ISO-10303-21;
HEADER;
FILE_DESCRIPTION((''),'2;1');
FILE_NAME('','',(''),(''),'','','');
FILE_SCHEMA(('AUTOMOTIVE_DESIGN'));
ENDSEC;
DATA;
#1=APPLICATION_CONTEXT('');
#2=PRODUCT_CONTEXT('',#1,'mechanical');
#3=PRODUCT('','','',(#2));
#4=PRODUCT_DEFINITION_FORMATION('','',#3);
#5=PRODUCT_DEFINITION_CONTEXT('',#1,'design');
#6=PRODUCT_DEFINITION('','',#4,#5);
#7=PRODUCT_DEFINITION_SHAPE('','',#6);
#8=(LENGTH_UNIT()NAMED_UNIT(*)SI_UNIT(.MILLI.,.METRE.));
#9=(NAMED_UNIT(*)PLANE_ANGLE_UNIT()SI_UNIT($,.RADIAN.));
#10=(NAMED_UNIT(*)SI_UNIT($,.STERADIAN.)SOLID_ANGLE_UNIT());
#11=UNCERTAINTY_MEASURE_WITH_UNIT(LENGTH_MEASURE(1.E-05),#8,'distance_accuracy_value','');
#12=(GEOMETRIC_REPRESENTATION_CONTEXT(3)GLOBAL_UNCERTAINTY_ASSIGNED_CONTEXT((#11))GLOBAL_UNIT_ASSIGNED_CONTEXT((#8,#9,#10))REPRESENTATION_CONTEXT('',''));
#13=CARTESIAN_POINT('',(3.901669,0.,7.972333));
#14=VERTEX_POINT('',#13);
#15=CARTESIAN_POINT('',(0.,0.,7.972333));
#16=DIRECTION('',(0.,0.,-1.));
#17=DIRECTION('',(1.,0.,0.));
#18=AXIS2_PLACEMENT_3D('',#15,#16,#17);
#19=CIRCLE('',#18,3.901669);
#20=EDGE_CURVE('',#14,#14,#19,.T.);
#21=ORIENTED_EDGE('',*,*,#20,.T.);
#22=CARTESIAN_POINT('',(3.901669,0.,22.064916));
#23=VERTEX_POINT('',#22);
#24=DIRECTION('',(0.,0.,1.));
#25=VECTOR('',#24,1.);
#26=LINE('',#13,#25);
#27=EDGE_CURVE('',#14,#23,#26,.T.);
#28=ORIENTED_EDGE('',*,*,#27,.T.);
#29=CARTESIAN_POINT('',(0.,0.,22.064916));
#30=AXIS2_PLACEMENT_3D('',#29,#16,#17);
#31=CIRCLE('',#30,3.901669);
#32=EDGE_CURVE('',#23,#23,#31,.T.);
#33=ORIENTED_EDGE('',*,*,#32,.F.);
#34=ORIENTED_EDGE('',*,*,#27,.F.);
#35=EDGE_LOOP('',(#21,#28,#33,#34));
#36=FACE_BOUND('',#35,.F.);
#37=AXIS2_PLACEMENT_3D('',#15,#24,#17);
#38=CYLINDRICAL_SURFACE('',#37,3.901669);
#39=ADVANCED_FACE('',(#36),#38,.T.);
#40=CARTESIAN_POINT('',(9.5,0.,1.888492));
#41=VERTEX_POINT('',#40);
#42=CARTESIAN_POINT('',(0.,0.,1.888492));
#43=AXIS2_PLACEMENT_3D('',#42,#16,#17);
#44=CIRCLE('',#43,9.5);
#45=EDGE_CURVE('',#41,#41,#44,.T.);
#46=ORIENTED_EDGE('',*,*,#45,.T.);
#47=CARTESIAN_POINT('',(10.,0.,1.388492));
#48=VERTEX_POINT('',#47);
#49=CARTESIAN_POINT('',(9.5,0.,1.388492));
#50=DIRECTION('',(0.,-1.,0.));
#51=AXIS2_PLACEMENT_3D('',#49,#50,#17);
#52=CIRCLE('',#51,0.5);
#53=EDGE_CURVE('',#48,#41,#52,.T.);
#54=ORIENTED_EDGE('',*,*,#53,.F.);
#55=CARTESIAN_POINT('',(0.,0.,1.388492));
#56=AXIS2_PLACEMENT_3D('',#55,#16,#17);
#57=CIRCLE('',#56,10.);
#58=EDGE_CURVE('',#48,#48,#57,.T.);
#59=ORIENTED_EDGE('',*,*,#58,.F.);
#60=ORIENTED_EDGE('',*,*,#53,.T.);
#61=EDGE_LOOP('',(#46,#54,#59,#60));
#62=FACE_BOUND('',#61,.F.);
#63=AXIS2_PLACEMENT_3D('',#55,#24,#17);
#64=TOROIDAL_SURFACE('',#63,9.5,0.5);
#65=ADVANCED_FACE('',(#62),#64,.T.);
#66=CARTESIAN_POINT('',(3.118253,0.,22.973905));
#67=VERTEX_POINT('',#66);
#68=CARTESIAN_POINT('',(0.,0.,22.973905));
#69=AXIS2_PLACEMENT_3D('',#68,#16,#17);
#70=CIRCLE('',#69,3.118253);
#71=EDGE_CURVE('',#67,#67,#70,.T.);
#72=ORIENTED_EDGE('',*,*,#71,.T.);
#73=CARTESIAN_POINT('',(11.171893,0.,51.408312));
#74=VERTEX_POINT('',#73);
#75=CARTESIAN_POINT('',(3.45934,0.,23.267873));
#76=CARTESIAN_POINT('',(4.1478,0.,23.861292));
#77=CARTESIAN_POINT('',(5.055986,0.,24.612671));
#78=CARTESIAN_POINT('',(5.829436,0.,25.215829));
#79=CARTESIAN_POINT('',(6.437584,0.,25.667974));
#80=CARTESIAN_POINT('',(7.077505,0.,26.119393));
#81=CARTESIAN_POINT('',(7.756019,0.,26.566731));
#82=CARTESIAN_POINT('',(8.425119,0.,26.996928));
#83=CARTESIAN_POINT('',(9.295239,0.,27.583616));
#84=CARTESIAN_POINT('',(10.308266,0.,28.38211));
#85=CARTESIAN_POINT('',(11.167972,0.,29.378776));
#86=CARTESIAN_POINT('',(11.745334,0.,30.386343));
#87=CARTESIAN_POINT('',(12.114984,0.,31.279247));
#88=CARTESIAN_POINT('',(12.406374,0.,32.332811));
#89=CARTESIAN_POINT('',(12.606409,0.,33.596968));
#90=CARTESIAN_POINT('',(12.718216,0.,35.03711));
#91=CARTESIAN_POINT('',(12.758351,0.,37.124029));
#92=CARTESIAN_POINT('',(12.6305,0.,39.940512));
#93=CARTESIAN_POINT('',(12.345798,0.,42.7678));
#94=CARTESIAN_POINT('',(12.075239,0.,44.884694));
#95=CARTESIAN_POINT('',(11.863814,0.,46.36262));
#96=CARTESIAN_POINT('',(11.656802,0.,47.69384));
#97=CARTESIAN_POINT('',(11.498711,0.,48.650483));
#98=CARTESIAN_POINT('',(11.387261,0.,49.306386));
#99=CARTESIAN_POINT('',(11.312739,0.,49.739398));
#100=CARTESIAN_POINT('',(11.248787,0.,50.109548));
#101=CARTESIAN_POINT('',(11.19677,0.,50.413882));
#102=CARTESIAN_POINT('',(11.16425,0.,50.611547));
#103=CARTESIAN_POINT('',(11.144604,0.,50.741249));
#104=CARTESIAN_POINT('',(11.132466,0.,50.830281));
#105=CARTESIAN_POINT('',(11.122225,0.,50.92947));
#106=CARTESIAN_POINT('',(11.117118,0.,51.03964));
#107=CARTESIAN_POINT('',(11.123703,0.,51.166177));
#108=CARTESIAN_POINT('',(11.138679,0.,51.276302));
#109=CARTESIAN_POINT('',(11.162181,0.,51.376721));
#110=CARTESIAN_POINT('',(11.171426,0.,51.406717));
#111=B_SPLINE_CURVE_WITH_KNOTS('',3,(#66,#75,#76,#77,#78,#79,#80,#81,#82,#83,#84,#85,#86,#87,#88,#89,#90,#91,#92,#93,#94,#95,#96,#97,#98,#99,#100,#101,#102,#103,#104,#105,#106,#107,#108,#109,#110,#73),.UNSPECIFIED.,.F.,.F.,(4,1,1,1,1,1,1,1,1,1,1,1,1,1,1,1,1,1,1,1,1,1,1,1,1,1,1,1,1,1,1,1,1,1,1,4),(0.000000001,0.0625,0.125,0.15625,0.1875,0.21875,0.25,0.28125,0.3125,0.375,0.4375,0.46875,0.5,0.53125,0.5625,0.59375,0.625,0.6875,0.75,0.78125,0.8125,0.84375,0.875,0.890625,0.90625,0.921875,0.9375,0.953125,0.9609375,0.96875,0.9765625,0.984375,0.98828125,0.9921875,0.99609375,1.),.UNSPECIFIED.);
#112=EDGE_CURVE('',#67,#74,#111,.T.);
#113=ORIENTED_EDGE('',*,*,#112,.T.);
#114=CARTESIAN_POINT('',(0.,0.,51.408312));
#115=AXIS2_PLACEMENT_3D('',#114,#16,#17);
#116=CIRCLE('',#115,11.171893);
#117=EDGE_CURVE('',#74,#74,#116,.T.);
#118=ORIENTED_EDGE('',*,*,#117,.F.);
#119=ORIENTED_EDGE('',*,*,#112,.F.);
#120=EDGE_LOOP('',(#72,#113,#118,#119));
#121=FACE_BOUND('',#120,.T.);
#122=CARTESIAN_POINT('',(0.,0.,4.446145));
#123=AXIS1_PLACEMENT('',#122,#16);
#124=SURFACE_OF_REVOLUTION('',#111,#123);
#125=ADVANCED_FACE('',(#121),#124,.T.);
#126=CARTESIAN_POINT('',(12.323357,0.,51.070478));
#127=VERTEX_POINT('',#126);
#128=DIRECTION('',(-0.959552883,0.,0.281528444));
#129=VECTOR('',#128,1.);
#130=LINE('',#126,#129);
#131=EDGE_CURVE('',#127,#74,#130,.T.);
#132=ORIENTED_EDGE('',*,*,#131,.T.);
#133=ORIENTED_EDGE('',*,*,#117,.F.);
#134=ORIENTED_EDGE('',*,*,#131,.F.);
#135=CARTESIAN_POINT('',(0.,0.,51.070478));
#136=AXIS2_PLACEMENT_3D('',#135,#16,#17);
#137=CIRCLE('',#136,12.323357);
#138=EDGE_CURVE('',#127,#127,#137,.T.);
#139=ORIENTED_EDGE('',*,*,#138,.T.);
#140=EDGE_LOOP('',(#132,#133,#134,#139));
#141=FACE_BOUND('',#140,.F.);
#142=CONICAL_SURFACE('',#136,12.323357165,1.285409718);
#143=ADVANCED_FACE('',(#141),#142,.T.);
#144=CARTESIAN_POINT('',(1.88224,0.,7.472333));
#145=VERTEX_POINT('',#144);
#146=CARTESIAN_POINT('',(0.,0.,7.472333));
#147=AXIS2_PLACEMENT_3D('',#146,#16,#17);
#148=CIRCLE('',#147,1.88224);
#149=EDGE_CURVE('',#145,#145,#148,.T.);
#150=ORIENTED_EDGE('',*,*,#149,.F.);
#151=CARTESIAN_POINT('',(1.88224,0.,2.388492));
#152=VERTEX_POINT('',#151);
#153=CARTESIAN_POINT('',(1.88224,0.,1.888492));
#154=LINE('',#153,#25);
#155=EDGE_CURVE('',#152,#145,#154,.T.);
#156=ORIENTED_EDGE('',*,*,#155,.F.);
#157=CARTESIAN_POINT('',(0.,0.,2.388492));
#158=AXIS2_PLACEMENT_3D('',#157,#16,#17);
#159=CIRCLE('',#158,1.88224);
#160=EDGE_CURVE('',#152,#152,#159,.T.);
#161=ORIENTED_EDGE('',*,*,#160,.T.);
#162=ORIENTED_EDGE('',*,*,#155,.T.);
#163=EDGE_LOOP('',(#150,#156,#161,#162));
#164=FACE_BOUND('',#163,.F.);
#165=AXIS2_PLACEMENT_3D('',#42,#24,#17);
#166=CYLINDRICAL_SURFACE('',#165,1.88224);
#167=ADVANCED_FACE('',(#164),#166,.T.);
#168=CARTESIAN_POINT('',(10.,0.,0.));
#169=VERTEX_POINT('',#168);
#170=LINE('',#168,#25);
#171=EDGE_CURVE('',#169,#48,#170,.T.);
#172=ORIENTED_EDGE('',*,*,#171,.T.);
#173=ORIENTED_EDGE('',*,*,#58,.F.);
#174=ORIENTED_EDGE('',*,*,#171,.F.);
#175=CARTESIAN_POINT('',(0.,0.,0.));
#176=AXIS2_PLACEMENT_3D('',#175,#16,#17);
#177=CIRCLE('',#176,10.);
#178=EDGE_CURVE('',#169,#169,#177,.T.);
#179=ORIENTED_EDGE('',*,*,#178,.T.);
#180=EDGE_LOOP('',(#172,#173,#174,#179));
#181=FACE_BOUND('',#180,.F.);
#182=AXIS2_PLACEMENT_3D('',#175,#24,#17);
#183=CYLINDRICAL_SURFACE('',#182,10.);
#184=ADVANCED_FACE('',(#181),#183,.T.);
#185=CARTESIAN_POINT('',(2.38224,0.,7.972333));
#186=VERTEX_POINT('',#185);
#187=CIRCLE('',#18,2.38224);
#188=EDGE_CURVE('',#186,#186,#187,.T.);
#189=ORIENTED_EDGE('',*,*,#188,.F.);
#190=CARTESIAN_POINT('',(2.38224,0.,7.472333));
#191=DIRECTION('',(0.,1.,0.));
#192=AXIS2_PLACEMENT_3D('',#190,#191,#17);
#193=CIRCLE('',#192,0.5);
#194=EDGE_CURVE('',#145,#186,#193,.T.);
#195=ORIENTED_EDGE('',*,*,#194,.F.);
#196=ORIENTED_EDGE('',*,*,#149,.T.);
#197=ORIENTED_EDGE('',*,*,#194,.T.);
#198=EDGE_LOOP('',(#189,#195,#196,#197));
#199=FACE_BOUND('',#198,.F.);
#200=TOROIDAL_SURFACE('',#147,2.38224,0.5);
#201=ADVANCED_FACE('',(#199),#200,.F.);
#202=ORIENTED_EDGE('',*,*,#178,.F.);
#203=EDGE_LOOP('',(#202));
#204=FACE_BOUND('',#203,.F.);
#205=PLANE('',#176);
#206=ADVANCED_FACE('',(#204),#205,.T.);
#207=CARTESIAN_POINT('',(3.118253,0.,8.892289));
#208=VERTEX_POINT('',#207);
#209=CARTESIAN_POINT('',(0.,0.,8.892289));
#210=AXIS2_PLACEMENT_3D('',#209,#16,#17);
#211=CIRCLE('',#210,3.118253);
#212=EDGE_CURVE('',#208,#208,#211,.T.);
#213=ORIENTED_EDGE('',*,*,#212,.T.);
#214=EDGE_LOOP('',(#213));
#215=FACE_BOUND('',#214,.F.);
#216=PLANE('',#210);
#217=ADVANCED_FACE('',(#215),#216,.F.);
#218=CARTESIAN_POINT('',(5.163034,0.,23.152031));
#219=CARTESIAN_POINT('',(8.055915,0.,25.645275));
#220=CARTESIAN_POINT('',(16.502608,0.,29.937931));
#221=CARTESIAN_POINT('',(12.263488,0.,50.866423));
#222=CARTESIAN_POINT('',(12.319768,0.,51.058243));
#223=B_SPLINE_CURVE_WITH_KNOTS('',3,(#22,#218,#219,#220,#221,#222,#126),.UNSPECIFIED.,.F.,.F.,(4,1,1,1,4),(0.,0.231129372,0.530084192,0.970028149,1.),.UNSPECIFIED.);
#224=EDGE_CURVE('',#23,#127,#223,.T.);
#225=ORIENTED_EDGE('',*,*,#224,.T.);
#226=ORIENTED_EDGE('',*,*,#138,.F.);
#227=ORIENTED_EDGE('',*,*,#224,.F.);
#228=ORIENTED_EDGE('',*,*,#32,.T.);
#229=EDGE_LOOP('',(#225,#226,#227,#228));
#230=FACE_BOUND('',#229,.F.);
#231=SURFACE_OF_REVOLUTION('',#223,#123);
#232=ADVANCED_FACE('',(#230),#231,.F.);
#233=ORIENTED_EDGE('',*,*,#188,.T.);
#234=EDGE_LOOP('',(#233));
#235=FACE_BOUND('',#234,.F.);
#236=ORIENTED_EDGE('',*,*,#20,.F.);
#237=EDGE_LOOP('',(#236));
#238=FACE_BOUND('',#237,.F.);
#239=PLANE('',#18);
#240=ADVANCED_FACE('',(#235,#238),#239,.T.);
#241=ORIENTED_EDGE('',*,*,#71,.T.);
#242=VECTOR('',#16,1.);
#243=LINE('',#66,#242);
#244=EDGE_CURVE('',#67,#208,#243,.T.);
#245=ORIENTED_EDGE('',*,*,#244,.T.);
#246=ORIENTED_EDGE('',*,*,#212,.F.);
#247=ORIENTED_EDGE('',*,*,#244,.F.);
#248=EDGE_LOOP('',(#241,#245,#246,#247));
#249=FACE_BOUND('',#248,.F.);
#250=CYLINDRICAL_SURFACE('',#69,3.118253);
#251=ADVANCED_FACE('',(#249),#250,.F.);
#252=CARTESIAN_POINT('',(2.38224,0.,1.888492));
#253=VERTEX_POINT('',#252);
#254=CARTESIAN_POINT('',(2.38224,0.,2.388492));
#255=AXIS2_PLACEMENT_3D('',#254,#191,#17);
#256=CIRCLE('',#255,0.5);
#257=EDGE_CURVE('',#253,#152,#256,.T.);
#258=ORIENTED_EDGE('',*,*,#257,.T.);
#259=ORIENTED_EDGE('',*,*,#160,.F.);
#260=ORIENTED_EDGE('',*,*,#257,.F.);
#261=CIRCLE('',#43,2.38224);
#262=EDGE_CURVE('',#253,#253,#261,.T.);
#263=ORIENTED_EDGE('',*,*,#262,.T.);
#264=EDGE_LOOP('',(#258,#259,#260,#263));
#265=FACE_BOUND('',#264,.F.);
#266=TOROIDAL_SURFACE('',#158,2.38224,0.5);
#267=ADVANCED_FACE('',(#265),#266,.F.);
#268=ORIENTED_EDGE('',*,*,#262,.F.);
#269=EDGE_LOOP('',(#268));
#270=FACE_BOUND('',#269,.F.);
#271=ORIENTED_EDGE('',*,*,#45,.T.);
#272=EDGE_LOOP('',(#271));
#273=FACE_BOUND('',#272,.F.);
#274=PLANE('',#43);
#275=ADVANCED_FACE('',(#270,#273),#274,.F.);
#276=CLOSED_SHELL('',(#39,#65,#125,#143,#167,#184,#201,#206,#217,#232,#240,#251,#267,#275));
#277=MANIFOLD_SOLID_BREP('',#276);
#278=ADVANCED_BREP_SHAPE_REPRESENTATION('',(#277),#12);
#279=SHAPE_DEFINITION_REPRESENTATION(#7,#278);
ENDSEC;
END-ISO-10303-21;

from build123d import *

# Parameters (mm, degrees)
F2_R = 0.5


# Not quite as in the source:
# - a feature of the source that left no trace in its solid (it failed there, or was rolled back) is left out
# - the dataset's text gives a spline's control points without its knots; the knots are read off the source's solid


with BuildPart() as f1:
    # F0 (on Front) → F1 (revolve)
    with BuildSketch(Plane.XZ):
        with BuildLine():
            Line((0, 8.8922893628), (0, 0))
            Line((0, 0), (10, 0))
            Line((10, 0), (10, 1.8884923775))
            Line((10, 1.8884923775), (1.8822399434, 1.8884923775))
            Line((1.8822399434, 1.8884923775), (1.8822399434, 7.9723326489))
            Line((1.8822399434, 7.9723326489), (3.9016692663, 7.9723326489))
            Line((3.9016692663, 7.9723326489), (3.9016692663, 22.0649164012))
            add(Edge.make_bspline(
                [(3.9016692663, 22.0649164012), (5.1630344119, 23.1520306668), (8.0559152247, 25.6452753955), (16.5026077823, 29.9379306564), (12.263488456, 50.8664231488), (12.3197676064, 51.0582432728), (12.3233571649, 51.0704778135)],
                knots=[0, 0, 0, 0, 0.2311293716, 0.5300841921, 0.9700281494, 1, 1, 1, 1], degree=3))
            Line((12.3233571649, 51.0704778135), (11.1718934655, 51.4083120162))
            add(Edge.make_bspline(
                [(3.1182529682, 22.9739045768), (3.4593403907, 23.2678725877), (4.1477996012, 23.8612916433), (5.055986388, 24.612670911), (5.8294364602, 25.2158290825), (6.4375839903, 25.6679744102), (7.0775050494, 26.1193928261), (7.7560186195, 26.5667311764), (8.4251192748, 26.9969284999), (9.2952385489, 27.5836159192), (10.3082664571, 28.3821097797), (11.1679720476, 29.3787760328), (11.7453344155, 30.3863434128), (12.1149836837, 31.2792473003), (12.4063741535, 32.3328106346), (12.6064087785, 33.5969680598), (12.7182156401, 35.0371100675), (12.7583513738, 37.1240288557), (12.6305002665, 39.940511974), (12.3457983074, 42.7678000329), (12.0752385257, 44.8846941108), (11.8638140518, 46.3626203182), (11.656802466, 47.6938398023), (11.4987113533, 48.6504829476), (11.3872612278, 49.3063855837), (11.3127390143, 49.7393978893), (11.2487872649, 50.1095476693), (11.196769712, 50.4138822278), (11.1642496864, 50.6115467989), (11.1446042442, 50.7412492276), (11.1324663607, 50.8302814164), (11.1222249941, 50.9294704016), (11.1171182056, 51.0396395949), (11.1237031708, 51.1661769089), (11.1386792065, 51.2763017797), (11.1621810328, 51.3767208912), (11.1714256361, 51.4067174809), (11.1718934655, 51.4083120162)],
                knots=[1.1e-09, 1.1e-09, 1.1e-09, 1.1e-09, 0.0625, 0.125, 0.15625, 0.1875, 0.21875, 0.25, 0.28125, 0.3125, 0.375, 0.4375, 0.46875, 0.5, 0.53125, 0.5625, 0.59375, 0.625, 0.6875, 0.75, 0.78125, 0.8125, 0.84375, 0.875, 0.890625, 0.90625, 0.921875, 0.9375, 0.953125, 0.9609375, 0.96875, 0.9765625, 0.984375, 0.98828125, 0.9921875, 0.99609375, 1, 1, 1, 1], degree=3))
            Line((3.1182529682, 22.9739045768), (3.1182529682, 8.8922893628))
            Line((3.1182529682, 8.8922893628), (1.4163269661, 8.8922893628))
            Line((1.4163269661, 8.8922893628), (0, 8.8922893628))
        make_face()
    revolve(axis=Axis((0, 0, 4.4461446814), (0, 0, -1)))

    # F2
    f2_edges = [f1.edges().sort_by_distance(p)[0] for p in [
        (-1.88224, 0, 1.888492),
        (-1.88224, 0, 7.972333),
        (1.88224, 0, 4.930413),
        (-10, 0, 1.888492),
    ]]
    fillet(f2_edges, radius=F2_R)


solid = f1.part
